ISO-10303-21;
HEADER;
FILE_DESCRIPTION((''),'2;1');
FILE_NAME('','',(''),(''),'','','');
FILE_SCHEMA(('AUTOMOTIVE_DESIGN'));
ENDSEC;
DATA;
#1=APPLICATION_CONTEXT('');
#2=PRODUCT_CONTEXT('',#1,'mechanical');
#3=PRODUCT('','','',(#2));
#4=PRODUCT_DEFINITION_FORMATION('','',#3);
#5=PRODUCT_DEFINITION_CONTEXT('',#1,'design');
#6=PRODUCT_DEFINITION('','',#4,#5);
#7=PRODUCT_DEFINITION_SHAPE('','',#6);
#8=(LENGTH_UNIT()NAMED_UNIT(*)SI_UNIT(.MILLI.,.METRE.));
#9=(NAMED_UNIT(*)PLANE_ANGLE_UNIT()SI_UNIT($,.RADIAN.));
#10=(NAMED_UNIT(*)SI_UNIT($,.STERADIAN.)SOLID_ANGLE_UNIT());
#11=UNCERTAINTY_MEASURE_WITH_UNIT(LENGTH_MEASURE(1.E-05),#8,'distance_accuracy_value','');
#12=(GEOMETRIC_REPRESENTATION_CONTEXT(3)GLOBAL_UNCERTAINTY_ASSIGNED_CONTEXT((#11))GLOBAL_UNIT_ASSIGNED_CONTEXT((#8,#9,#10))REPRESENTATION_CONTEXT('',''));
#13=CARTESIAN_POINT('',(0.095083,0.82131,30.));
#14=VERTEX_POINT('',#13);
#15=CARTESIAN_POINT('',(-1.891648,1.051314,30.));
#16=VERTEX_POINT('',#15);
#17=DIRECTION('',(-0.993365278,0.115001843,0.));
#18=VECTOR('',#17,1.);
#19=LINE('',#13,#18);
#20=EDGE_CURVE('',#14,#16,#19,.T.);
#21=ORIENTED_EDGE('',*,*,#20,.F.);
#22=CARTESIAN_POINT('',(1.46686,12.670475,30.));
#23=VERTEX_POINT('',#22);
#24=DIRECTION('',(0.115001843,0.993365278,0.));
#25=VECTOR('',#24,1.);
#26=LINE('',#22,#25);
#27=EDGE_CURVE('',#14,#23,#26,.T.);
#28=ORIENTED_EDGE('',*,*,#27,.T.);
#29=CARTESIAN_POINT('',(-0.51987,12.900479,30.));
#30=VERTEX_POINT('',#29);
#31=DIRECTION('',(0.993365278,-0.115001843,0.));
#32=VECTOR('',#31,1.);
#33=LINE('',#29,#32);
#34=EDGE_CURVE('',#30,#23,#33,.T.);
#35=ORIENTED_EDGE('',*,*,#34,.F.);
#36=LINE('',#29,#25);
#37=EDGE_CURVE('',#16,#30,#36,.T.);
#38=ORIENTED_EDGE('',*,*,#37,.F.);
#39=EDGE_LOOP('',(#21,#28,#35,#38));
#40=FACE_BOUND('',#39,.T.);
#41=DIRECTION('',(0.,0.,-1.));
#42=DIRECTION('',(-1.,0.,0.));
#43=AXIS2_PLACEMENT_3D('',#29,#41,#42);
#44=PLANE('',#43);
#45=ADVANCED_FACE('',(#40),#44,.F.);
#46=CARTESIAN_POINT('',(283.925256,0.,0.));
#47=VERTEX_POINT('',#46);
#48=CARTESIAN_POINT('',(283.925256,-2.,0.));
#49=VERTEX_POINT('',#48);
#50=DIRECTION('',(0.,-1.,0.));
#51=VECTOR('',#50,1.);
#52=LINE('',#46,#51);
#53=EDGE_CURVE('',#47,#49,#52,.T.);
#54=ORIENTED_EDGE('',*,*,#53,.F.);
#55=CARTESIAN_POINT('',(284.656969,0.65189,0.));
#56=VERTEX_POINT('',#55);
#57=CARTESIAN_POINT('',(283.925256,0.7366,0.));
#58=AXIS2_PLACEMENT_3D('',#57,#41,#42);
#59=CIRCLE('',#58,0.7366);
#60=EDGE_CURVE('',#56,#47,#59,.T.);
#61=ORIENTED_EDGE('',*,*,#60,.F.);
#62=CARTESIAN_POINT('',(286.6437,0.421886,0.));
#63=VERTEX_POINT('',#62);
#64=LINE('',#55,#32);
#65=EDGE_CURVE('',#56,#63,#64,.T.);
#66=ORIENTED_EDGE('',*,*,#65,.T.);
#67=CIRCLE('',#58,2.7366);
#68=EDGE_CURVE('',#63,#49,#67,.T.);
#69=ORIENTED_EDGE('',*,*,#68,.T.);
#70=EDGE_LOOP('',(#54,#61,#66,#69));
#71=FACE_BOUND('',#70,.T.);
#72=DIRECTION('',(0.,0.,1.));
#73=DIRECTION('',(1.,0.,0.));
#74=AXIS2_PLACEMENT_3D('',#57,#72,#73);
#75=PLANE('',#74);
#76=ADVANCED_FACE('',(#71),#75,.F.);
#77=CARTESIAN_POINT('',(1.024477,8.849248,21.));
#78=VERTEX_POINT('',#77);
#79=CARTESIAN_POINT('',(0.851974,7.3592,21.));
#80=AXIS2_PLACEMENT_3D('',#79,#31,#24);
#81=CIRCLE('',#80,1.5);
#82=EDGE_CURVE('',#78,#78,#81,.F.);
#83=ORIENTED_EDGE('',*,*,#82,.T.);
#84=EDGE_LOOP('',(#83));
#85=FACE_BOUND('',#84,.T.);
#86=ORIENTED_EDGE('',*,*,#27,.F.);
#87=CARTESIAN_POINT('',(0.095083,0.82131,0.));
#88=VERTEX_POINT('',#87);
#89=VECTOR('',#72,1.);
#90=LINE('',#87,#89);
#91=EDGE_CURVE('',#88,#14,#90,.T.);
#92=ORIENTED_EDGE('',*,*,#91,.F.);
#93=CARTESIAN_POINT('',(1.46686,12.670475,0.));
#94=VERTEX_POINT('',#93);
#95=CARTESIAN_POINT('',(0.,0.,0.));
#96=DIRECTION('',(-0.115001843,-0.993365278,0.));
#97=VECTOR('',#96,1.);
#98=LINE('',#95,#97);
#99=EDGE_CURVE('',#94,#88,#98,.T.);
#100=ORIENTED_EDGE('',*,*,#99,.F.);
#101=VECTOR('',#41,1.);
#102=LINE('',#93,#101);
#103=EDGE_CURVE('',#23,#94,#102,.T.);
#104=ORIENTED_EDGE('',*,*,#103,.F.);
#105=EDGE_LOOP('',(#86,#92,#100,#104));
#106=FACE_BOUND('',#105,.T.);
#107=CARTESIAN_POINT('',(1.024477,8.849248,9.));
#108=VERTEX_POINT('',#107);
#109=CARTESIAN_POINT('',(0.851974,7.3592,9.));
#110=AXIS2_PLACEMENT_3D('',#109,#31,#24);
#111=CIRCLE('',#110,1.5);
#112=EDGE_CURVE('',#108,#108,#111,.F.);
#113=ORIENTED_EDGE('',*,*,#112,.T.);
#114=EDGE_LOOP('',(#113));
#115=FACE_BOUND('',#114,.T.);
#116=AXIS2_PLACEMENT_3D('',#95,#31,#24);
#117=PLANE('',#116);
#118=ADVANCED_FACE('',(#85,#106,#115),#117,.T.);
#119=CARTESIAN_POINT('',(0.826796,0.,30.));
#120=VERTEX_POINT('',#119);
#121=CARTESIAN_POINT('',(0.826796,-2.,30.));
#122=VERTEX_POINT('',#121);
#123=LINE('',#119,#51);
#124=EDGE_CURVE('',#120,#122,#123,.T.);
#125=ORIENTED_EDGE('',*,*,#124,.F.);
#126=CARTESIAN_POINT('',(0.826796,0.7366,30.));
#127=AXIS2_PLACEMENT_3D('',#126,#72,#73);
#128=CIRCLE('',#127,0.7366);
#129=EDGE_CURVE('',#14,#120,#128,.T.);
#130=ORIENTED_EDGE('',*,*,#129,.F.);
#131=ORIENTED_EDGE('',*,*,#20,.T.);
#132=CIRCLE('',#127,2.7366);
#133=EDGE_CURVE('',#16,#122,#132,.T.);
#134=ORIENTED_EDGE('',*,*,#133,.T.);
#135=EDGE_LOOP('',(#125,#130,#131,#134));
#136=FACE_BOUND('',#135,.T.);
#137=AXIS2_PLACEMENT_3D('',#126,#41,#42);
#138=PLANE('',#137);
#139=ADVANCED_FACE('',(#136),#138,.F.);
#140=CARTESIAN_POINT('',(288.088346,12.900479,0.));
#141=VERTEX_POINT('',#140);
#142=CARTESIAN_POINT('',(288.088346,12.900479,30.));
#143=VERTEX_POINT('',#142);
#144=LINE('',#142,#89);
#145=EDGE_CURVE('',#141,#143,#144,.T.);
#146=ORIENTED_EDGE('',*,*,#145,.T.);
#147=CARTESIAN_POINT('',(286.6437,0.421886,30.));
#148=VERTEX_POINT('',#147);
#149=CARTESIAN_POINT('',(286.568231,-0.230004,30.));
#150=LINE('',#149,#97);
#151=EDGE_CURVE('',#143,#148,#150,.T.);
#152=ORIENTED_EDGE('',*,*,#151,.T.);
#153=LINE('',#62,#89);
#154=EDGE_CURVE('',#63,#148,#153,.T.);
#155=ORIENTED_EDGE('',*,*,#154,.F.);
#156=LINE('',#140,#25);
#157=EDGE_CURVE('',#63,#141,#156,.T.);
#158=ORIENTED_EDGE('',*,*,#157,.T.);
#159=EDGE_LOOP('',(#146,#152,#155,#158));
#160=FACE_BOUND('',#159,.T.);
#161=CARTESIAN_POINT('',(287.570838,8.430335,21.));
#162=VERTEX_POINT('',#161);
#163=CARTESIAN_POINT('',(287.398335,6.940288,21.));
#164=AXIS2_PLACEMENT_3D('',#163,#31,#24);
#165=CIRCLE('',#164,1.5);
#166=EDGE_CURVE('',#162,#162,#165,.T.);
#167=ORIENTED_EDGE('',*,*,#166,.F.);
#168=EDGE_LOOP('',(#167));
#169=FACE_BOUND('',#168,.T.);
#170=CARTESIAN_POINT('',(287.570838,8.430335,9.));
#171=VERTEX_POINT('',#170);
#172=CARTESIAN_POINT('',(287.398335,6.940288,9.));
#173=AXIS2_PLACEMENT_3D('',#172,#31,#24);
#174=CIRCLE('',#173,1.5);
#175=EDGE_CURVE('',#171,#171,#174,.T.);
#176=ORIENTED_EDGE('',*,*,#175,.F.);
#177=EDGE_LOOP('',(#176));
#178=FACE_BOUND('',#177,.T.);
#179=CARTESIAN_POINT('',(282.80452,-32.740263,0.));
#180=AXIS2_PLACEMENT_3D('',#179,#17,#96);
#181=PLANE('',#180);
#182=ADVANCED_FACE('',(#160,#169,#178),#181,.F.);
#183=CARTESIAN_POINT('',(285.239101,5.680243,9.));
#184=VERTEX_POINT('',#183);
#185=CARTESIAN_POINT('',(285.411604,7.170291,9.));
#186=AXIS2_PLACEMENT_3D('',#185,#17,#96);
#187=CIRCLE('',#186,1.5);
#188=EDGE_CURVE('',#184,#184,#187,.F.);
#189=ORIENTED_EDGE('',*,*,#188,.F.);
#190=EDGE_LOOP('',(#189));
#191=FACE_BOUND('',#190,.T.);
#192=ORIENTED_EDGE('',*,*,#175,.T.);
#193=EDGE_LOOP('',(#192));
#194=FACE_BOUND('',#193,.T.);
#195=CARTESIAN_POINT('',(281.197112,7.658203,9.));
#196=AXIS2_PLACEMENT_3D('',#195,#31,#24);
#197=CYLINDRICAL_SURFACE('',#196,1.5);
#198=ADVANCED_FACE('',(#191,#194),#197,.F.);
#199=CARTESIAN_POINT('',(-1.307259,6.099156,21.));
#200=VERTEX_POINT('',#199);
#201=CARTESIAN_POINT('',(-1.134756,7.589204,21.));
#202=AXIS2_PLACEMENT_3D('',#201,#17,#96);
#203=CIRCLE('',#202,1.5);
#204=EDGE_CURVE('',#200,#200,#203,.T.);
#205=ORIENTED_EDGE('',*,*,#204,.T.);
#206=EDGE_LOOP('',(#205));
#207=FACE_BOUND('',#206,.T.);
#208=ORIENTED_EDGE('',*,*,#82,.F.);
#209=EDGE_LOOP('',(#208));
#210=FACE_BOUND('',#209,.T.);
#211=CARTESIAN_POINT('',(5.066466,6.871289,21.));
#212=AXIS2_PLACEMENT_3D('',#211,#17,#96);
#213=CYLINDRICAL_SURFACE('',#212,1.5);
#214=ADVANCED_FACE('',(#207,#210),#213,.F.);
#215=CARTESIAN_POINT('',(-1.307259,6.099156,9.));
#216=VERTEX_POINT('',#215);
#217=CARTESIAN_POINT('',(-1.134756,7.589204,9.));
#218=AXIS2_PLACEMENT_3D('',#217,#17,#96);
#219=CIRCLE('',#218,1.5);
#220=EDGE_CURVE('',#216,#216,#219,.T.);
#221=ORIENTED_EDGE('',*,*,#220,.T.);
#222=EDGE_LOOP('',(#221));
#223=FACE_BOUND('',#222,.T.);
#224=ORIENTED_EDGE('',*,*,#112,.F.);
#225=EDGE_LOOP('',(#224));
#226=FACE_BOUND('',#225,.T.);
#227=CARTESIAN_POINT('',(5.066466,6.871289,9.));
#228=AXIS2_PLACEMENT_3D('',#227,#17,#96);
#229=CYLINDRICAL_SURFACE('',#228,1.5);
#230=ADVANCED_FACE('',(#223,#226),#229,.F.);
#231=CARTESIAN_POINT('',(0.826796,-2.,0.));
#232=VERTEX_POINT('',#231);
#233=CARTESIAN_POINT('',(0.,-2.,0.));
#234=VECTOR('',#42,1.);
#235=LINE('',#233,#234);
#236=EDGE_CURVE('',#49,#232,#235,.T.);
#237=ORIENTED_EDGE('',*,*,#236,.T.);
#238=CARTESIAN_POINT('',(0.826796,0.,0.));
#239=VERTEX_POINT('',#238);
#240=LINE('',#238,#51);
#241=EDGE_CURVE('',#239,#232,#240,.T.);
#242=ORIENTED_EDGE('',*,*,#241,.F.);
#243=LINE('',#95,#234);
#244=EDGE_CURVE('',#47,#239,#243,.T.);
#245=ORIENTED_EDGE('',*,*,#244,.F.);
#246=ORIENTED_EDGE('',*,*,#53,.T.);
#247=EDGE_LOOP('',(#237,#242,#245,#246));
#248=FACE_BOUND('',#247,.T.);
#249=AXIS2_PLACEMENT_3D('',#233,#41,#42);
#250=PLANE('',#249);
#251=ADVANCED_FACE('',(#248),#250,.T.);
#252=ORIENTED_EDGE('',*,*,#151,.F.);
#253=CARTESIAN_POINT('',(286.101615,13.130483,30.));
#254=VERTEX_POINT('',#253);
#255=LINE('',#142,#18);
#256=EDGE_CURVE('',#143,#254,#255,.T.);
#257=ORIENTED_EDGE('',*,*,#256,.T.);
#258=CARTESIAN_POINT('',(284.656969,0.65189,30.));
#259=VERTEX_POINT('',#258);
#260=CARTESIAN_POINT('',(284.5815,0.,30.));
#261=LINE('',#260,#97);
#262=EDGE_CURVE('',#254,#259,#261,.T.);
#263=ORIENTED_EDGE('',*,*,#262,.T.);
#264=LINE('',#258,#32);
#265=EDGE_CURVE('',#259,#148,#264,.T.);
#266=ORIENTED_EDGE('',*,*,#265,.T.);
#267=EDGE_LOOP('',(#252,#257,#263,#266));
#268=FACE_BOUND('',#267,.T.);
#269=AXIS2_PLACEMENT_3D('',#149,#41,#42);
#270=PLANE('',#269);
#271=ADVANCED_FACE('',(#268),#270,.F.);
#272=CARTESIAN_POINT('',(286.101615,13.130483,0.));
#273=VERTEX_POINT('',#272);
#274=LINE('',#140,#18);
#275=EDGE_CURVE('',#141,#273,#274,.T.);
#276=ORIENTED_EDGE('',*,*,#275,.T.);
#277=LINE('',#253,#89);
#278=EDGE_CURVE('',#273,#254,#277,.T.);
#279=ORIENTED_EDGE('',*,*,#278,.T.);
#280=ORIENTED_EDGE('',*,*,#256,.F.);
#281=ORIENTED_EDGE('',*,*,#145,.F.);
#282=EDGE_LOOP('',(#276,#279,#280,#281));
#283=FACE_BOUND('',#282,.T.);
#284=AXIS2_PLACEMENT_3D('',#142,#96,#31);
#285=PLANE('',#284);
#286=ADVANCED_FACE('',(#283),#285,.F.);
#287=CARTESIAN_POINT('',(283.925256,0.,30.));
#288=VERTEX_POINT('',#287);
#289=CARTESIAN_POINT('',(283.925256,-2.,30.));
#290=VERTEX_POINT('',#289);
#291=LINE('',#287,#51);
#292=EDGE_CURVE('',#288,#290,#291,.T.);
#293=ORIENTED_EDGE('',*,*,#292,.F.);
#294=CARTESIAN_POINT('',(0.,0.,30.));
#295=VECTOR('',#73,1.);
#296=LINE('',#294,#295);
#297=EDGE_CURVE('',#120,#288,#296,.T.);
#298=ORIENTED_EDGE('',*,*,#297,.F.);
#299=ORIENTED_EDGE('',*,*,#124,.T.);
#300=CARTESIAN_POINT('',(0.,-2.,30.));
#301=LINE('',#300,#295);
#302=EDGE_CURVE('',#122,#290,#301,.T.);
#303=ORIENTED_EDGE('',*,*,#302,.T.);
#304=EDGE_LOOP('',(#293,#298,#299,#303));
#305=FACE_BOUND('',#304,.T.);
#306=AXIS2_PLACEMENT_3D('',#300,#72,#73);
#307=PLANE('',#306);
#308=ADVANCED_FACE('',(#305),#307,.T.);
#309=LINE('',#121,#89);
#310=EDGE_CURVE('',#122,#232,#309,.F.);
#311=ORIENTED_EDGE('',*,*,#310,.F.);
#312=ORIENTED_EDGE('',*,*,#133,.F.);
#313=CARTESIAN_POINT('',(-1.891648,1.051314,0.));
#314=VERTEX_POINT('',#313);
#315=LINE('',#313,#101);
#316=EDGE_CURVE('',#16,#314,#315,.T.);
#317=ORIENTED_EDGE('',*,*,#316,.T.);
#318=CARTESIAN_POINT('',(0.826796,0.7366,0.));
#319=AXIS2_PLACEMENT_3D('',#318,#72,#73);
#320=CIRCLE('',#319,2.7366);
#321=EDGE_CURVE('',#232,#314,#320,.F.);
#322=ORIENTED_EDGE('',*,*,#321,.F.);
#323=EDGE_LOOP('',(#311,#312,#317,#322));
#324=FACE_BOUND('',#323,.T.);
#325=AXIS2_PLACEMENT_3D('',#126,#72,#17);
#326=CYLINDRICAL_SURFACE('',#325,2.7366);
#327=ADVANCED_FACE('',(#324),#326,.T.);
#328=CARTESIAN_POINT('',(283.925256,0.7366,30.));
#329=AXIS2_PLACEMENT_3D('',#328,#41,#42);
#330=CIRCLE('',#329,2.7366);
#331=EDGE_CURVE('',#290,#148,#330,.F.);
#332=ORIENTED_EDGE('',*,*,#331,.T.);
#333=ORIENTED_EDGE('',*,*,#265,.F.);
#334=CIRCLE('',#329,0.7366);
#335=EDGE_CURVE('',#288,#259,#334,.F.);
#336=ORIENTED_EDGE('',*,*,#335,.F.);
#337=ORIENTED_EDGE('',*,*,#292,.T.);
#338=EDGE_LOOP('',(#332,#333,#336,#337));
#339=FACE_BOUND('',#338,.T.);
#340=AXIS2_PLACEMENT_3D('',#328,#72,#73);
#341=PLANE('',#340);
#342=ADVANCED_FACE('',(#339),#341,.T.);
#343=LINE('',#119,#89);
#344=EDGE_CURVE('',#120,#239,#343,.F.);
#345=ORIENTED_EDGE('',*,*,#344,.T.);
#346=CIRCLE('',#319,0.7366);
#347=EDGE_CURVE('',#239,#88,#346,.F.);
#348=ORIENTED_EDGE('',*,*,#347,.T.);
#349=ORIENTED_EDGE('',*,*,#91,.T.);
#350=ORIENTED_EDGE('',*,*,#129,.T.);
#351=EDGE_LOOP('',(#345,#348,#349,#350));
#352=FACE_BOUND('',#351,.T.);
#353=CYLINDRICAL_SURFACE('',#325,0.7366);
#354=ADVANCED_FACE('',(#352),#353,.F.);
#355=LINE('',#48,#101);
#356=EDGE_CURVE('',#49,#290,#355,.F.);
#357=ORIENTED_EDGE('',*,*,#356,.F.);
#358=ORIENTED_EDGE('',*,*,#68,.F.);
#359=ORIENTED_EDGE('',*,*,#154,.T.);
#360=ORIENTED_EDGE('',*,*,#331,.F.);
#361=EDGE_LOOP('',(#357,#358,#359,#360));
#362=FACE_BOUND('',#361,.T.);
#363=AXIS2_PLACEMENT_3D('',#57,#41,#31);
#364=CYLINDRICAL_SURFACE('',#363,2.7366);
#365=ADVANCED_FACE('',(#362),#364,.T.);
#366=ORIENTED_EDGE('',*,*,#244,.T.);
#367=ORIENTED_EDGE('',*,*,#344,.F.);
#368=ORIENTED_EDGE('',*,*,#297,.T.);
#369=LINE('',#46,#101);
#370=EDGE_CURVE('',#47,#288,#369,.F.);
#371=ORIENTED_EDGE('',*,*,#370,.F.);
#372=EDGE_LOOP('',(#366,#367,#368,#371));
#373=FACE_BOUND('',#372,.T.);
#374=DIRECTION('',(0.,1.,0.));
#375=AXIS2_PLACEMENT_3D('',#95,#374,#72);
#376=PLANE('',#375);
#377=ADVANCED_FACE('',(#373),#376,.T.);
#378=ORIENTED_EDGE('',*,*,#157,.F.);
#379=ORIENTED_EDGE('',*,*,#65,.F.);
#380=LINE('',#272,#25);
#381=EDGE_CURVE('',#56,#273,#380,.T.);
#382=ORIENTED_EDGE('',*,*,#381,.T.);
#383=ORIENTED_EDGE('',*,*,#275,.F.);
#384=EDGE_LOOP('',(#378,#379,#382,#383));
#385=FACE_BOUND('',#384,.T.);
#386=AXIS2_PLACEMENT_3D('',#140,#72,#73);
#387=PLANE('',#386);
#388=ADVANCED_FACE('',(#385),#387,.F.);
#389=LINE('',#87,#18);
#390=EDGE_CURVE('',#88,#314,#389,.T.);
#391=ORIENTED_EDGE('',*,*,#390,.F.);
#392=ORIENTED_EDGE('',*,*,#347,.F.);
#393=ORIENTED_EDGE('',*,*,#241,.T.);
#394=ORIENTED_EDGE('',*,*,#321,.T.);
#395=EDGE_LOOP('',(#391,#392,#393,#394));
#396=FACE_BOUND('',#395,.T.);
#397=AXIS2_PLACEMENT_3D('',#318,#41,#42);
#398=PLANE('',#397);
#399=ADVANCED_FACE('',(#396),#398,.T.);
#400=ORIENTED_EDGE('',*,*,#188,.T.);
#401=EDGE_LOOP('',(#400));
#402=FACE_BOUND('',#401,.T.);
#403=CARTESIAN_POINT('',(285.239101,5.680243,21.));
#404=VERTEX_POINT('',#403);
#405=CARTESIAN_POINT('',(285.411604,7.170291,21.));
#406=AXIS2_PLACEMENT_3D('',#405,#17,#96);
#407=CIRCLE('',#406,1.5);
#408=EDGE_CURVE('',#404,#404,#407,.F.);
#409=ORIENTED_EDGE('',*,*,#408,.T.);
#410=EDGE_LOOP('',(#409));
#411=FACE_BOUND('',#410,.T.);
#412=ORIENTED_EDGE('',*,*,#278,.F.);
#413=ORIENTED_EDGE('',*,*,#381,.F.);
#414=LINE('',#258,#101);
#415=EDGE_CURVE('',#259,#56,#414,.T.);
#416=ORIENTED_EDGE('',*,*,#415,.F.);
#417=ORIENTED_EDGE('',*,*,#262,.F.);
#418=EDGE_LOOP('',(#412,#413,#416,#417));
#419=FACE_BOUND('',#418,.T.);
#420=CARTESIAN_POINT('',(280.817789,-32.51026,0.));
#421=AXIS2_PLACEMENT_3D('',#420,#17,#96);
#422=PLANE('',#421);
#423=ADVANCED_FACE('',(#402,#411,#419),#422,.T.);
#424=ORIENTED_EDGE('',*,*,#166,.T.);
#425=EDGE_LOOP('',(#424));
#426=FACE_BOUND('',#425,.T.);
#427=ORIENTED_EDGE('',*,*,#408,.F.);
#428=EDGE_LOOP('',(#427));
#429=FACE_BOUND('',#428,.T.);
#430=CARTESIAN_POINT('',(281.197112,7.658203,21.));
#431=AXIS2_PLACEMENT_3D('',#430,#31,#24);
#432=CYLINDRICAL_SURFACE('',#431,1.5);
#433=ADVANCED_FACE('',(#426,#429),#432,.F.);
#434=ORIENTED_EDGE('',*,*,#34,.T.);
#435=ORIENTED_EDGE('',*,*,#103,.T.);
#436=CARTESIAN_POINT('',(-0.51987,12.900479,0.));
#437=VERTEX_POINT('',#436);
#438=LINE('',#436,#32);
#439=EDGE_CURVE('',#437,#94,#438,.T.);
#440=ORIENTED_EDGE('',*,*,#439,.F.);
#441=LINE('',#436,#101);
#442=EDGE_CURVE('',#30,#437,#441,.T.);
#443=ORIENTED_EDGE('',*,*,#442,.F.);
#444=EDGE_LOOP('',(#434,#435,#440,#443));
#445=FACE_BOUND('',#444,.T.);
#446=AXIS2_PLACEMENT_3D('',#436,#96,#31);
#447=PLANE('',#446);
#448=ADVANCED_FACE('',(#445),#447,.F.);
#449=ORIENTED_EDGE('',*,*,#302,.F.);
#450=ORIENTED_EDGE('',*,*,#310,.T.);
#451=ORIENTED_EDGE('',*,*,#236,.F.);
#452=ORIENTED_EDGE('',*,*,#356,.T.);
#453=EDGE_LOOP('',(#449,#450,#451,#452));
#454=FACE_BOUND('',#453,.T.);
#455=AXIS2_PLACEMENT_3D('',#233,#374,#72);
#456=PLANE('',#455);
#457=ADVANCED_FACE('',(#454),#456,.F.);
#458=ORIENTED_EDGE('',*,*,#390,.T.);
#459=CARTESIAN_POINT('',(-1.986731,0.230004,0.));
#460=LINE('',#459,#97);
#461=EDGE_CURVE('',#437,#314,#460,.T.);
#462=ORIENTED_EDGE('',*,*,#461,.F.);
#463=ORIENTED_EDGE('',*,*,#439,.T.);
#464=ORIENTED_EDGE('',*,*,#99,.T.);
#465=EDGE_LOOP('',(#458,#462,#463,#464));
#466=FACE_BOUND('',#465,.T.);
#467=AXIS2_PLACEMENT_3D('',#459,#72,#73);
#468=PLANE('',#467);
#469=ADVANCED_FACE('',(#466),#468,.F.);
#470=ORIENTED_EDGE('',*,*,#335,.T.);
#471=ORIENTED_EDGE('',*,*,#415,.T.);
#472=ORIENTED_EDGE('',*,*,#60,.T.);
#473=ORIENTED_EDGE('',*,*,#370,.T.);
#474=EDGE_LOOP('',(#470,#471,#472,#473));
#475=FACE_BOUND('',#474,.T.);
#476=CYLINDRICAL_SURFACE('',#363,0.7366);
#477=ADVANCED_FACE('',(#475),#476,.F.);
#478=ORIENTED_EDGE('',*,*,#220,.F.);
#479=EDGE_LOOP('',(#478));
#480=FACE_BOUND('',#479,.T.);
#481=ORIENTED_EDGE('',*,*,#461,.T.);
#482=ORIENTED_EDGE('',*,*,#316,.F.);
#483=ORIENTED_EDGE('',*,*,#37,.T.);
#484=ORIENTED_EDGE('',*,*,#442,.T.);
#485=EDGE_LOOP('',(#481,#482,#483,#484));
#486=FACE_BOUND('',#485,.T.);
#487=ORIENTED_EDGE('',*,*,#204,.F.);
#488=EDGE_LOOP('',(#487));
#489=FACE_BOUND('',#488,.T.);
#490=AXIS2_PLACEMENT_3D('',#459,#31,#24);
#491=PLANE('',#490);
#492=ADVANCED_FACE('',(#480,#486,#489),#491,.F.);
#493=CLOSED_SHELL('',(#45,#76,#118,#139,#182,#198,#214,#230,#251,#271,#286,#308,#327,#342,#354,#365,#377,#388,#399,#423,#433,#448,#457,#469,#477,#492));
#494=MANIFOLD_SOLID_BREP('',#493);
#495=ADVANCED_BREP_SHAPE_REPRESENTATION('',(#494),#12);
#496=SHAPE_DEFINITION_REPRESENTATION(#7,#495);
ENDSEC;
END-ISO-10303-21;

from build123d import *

# Parameters (mm, degrees)
SKETCH1_W                    = 284.5815
SKETCH1_H                    = 30
BASE_FLANGE1_DEPTH           = 2
EDGE_FLANGE1_STRIP_CUT_DEPTH = 30
EDGE_FLANGE1_DEPTH           = 30
EDGE_FLANGE2_STRIP_CUT_DEPTH = 30
EDGE_FLANGE2_DEPTH           = 30
SKETCH10_R                   = 1.5
MOUNTING_HOLES_DEPTH         = 2
SKETCH11_R                   = 1.5
CUT_EXTRUDE2_DEPTH           = 2


# Sheet-metal steps are written as plain solids
with BuildPart() as part:
    # Sketch1 → Base-Flange1 (new body)
    with BuildSketch(Plane(origin=(0, 0, 0), x_dir=(1, 0, 0), z_dir=(0, 1, 0))):
        with Locations((142.29075, -15)):
            Rectangle(SKETCH1_W, SKETCH1_H)
    extrude(amount=-BASE_FLANGE1_DEPTH)

    # Edge-Flange1 strip (across the edge) → Edge-Flange1 strip cut (cut)
    with BuildSketch(Plane(origin=(0, 0, 0), x_dir=(0.9933652782994915, -0.1150018428938158, 0), z_dir=(0, 0, 1))):
        Polygon((-9.511321415, -3.11448322), (1.051314043, -1.891647502), (0.821310357, 0.095083054), (-9.741325101, -1.127752664), align=None)
    extrude(amount=EDGE_FLANGE1_STRIP_CUT_DEPTH, mode=Mode.SUBTRACT)

    # Edge-Flange1 section (across the edge) → Edge-Flange1 (add)
    with BuildSketch(Plane(origin=(0, 0, 0), x_dir=(0.9933652782994915, -0.1150018428938158, 0), z_dir=(0, 0, 1))):
        with BuildLine():
            Line((-2, 0.826795918), (-2, 12.755102041))
            Line((-2, 12.755102041), (0, 12.755102041))
            Line((0, 12.755102041), (0, 0.826795918))
            ThreePointArc((0, 0.826795918), (0.246609229, 0.276806278), (0.821310357, 0.095083054))
            Line((0.821310357, 0.095083054), (1.051314043, -1.891647502))
            ThreePointArc((1.051314043, -1.891647502), (-1.083802855, -1.216513409), (-2, 0.826795918))
        make_face()
    extrude(amount=EDGE_FLANGE1_DEPTH)

    # Edge-Flange2 strip (across the edge) → Edge-Flange2 strip cut (cut)
    with BuildSketch(Plane(origin=(284.5815, 0, 30), x_dir=(-0.9933652782994906, 0.11500184289382274, 0), z_dir=(0, 0, -1))):
        Polygon((-8.988461998, -0.972764326), (0.421885957, -2.062199784), (0.651889643, -0.075469228), (-8.758458312, 1.013966231), align=None)
    extrude(amount=EDGE_FLANGE2_STRIP_CUT_DEPTH, mode=Mode.SUBTRACT)

    # Edge-Flange2 section (across the edge) → Edge-Flange2 (add)
    with BuildSketch(Plane(origin=(284.5815, 0, 30), x_dir=(-0.9933652782994906, 0.11500184289382274, 0), z_dir=(0, 0, -1))):
        with BuildLine():
            Line((-2, 0.656243636), (-2, 13.218181818))
            Line((-2, 13.218181818), (0, 13.218181818))
            Line((0, 13.218181818), (0, 0.656243636))
            ThreePointArc((0, 0.656243636), (0.186610359, 0.166252866), (0.651889643, -0.075469228))
            Line((0.651889643, -0.075469228), (0.421885957, -2.062199784))
            ThreePointArc((0.421885957, -2.062199784), (-1.306709327, -1.164159219), (-2, 0.656243636))
        make_face()
    extrude(amount=EDGE_FLANGE2_DEPTH)

    # Sketch10 → Mounting Holes (cut)
    with BuildSketch(Plane(origin=(-1.986730557, 0.230003686, 0), x_dir=(0, 0, 1), z_dir=(-0.9933652782994914, 0.11500184289381583, 0))):
        with Locations(Location((9, 7.408352498, 0), (0, 0, 270))):
            Circle(SKETCH10_R)
        with Locations(Location((21, 7.408352498, 0), (0, 0, 270))):
            Circle(SKETCH10_R)
    extrude(amount=-MOUNTING_HOLES_DEPTH, mode=Mode.SUBTRACT)

    # Sketch11 → Cut-Extrude2 (cut)
    with BuildSketch(Plane(origin=(282.804519594, -32.740263469, 0), x_dir=(0, 0, -1), z_dir=(0.9933652782994908, -0.11500184289382205, 0))):
        with Locations(Location((-21, 39.945578772, 0), (0, 0, 90))):
            Circle(SKETCH11_R)
        with Locations(Location((-9, 39.945578772, 0), (0, 0, 90))):
            Circle(SKETCH11_R)
    extrude(amount=-CUT_EXTRUDE2_DEPTH, mode=Mode.SUBTRACT)


solid = part.part
